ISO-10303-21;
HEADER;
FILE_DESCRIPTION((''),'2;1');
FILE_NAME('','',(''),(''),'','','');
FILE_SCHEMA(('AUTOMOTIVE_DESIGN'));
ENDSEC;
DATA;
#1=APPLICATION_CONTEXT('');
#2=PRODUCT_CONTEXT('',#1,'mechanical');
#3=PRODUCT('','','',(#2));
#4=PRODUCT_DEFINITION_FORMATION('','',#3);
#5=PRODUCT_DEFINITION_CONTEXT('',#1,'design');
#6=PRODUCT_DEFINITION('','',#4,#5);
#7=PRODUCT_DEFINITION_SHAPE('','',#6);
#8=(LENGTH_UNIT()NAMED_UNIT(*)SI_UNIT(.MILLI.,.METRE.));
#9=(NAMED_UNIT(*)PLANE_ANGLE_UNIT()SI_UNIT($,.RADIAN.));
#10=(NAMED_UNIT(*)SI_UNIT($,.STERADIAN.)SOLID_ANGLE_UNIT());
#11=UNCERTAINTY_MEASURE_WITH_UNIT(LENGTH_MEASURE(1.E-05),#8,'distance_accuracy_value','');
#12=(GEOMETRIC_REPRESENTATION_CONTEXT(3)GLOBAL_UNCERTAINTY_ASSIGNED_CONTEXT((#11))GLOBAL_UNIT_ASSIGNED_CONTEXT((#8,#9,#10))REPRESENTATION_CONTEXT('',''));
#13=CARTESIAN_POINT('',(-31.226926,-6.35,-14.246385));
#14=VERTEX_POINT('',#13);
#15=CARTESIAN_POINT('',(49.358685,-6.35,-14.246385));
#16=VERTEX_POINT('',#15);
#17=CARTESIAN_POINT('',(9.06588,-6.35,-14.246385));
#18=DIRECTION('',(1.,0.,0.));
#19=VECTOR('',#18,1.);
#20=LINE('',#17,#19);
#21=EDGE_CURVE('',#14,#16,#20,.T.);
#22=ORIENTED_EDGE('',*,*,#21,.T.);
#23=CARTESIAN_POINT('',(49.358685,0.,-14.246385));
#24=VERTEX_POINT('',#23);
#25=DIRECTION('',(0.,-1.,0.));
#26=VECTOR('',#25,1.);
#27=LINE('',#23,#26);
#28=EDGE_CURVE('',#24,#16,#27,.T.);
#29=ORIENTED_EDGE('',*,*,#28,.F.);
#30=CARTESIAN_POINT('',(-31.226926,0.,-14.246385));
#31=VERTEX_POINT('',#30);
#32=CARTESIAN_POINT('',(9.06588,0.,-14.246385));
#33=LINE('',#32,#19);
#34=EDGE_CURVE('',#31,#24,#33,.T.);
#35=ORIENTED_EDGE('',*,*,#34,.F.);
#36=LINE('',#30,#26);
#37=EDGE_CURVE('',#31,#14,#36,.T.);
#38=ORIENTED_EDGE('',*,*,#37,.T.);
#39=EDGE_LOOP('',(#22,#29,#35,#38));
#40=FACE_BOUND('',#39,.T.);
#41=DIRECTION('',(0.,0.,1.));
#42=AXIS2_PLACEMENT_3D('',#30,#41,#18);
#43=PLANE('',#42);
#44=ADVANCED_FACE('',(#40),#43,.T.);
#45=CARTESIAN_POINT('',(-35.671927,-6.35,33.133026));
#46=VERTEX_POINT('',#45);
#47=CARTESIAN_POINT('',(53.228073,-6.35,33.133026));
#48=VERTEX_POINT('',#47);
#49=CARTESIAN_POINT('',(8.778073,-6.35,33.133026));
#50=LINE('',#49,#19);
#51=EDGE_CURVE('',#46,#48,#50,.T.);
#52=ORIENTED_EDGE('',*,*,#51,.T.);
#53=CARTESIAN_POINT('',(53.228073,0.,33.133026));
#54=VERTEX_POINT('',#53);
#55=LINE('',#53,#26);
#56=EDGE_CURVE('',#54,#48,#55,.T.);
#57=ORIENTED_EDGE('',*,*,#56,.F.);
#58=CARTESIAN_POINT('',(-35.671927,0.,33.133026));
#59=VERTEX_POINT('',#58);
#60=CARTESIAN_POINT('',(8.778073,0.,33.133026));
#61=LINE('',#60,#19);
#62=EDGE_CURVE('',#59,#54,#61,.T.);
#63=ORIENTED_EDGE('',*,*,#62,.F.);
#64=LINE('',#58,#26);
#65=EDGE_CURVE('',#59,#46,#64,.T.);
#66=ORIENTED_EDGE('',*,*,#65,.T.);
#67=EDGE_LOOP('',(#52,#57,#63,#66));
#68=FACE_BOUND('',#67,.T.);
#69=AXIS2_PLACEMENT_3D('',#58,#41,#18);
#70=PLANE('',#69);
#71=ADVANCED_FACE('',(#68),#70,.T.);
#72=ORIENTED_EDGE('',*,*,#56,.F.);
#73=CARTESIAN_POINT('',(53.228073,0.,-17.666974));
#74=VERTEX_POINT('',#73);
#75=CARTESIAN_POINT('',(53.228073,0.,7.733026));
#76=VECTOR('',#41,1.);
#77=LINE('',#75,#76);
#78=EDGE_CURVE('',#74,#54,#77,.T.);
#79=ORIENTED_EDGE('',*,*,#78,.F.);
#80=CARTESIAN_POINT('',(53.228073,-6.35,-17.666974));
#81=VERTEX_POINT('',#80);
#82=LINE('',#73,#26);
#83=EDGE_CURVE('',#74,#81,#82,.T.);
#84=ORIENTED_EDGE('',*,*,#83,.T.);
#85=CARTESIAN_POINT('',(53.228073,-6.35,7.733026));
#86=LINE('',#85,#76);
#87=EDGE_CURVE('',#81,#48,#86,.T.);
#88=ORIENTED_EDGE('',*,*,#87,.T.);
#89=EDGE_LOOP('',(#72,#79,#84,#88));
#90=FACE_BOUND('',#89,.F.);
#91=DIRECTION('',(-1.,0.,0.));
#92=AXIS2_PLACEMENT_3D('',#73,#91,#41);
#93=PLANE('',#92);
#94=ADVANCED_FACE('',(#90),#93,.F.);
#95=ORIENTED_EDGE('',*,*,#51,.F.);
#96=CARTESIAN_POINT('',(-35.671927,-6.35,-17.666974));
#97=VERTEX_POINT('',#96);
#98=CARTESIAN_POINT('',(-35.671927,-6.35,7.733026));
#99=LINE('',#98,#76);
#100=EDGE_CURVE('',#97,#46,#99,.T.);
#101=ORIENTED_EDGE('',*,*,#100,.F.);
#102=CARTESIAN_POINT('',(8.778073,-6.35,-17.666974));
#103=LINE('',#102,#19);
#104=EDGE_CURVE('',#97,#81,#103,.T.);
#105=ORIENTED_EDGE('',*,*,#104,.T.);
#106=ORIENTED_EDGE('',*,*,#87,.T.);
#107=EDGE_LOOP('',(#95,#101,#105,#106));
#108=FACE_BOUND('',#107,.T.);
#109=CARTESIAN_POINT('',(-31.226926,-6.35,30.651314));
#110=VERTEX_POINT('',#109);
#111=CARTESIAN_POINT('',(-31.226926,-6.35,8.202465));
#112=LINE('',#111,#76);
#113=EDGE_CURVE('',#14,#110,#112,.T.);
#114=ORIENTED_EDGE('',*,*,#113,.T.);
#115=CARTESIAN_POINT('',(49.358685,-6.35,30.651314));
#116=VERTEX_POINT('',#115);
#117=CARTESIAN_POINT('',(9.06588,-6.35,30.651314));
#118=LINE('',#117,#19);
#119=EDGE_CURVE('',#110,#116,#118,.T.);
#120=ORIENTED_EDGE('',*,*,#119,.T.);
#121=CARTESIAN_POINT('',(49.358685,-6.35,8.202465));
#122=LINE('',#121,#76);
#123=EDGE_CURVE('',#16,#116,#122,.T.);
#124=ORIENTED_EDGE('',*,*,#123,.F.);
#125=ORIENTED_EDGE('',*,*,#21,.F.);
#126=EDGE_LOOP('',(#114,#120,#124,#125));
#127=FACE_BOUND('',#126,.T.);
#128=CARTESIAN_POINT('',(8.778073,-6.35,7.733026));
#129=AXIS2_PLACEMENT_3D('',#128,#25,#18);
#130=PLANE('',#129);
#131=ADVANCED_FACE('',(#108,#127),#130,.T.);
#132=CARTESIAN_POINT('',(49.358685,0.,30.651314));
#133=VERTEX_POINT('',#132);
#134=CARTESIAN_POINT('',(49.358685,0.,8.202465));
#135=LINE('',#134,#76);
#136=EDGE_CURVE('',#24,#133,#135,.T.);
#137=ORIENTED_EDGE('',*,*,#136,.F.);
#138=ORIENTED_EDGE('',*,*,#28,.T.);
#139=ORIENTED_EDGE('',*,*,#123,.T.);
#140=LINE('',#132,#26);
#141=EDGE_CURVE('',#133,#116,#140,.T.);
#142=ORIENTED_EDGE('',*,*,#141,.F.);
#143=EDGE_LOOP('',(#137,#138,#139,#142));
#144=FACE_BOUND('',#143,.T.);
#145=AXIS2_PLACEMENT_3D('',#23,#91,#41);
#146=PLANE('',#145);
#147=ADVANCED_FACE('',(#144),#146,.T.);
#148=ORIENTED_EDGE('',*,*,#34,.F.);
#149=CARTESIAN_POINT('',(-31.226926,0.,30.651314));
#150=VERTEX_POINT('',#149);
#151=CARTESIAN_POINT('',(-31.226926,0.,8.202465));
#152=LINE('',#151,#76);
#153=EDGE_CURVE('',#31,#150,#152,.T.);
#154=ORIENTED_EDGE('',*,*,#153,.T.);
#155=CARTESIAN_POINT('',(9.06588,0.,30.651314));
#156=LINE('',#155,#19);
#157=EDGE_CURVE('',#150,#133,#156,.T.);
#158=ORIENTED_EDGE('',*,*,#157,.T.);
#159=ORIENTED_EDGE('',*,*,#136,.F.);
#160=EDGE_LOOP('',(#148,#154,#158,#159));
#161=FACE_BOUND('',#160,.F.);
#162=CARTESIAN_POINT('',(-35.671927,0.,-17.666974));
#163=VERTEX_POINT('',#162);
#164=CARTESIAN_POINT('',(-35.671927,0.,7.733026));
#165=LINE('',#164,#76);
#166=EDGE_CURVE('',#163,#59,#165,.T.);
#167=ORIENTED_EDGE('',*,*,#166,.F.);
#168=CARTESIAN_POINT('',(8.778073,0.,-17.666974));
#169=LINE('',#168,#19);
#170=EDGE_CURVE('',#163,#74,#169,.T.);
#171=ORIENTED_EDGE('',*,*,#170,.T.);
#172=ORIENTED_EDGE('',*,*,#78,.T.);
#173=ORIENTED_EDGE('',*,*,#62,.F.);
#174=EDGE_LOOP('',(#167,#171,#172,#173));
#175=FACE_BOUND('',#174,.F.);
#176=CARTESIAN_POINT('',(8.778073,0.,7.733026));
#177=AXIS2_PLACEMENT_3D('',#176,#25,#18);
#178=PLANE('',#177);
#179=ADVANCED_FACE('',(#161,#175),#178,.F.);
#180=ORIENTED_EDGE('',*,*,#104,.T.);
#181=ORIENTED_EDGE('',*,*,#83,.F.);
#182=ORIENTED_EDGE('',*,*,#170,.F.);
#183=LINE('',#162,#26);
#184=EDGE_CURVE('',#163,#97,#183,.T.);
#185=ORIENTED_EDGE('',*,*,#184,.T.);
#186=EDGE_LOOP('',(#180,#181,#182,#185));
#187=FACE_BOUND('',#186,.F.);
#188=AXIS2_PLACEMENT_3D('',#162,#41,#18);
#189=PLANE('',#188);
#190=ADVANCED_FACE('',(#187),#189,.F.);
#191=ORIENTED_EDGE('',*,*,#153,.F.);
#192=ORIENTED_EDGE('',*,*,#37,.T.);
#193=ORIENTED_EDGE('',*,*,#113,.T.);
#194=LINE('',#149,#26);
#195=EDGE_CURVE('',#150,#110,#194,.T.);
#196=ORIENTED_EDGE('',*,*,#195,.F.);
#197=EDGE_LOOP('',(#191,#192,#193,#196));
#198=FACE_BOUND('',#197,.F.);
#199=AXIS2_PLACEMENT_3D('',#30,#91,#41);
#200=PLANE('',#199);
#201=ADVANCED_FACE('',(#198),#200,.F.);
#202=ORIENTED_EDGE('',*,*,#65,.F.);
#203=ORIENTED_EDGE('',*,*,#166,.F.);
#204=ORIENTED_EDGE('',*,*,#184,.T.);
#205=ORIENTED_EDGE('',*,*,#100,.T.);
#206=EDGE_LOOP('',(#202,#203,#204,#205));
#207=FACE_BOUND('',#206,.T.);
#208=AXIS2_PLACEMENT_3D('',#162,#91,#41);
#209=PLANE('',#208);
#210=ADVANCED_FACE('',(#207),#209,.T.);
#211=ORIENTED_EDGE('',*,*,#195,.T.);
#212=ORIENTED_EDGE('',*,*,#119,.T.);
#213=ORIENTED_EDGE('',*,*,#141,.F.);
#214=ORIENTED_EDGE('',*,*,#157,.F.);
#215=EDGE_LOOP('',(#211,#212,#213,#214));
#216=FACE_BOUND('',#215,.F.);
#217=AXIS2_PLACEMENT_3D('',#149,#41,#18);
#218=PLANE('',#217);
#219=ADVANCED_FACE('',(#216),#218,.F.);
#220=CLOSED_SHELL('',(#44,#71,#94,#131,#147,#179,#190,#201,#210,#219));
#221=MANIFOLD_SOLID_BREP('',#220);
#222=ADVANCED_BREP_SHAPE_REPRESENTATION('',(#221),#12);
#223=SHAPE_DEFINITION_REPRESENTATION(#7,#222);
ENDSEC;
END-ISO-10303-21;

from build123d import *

# Parameters (mm, degrees)
F0_W     = 88.9
F0_H     = 50.8
F0_W_2   = 80.5856101215
F0_H_2   = 44.8976987973
F1_DEPTH = 6.35


# Not quite as in the source:
# - the program builds the solid bodies; features that only make, move or delete a surface that nothing else refers to are left out


with BuildPart() as f1:
    # F0 (on Front) → F1 (new body)
    with BuildSketch(Plane.XZ):
        with Locations((8.7780728936, 7.7330259998)):
            Rectangle(F0_W, F0_H)
        with Locations((9.0658795089, 8.2024647854)):
            Rectangle(F0_W_2, F0_H_2, mode=Mode.SUBTRACT)
    extrude(amount=F1_DEPTH)


solid = f1.part
